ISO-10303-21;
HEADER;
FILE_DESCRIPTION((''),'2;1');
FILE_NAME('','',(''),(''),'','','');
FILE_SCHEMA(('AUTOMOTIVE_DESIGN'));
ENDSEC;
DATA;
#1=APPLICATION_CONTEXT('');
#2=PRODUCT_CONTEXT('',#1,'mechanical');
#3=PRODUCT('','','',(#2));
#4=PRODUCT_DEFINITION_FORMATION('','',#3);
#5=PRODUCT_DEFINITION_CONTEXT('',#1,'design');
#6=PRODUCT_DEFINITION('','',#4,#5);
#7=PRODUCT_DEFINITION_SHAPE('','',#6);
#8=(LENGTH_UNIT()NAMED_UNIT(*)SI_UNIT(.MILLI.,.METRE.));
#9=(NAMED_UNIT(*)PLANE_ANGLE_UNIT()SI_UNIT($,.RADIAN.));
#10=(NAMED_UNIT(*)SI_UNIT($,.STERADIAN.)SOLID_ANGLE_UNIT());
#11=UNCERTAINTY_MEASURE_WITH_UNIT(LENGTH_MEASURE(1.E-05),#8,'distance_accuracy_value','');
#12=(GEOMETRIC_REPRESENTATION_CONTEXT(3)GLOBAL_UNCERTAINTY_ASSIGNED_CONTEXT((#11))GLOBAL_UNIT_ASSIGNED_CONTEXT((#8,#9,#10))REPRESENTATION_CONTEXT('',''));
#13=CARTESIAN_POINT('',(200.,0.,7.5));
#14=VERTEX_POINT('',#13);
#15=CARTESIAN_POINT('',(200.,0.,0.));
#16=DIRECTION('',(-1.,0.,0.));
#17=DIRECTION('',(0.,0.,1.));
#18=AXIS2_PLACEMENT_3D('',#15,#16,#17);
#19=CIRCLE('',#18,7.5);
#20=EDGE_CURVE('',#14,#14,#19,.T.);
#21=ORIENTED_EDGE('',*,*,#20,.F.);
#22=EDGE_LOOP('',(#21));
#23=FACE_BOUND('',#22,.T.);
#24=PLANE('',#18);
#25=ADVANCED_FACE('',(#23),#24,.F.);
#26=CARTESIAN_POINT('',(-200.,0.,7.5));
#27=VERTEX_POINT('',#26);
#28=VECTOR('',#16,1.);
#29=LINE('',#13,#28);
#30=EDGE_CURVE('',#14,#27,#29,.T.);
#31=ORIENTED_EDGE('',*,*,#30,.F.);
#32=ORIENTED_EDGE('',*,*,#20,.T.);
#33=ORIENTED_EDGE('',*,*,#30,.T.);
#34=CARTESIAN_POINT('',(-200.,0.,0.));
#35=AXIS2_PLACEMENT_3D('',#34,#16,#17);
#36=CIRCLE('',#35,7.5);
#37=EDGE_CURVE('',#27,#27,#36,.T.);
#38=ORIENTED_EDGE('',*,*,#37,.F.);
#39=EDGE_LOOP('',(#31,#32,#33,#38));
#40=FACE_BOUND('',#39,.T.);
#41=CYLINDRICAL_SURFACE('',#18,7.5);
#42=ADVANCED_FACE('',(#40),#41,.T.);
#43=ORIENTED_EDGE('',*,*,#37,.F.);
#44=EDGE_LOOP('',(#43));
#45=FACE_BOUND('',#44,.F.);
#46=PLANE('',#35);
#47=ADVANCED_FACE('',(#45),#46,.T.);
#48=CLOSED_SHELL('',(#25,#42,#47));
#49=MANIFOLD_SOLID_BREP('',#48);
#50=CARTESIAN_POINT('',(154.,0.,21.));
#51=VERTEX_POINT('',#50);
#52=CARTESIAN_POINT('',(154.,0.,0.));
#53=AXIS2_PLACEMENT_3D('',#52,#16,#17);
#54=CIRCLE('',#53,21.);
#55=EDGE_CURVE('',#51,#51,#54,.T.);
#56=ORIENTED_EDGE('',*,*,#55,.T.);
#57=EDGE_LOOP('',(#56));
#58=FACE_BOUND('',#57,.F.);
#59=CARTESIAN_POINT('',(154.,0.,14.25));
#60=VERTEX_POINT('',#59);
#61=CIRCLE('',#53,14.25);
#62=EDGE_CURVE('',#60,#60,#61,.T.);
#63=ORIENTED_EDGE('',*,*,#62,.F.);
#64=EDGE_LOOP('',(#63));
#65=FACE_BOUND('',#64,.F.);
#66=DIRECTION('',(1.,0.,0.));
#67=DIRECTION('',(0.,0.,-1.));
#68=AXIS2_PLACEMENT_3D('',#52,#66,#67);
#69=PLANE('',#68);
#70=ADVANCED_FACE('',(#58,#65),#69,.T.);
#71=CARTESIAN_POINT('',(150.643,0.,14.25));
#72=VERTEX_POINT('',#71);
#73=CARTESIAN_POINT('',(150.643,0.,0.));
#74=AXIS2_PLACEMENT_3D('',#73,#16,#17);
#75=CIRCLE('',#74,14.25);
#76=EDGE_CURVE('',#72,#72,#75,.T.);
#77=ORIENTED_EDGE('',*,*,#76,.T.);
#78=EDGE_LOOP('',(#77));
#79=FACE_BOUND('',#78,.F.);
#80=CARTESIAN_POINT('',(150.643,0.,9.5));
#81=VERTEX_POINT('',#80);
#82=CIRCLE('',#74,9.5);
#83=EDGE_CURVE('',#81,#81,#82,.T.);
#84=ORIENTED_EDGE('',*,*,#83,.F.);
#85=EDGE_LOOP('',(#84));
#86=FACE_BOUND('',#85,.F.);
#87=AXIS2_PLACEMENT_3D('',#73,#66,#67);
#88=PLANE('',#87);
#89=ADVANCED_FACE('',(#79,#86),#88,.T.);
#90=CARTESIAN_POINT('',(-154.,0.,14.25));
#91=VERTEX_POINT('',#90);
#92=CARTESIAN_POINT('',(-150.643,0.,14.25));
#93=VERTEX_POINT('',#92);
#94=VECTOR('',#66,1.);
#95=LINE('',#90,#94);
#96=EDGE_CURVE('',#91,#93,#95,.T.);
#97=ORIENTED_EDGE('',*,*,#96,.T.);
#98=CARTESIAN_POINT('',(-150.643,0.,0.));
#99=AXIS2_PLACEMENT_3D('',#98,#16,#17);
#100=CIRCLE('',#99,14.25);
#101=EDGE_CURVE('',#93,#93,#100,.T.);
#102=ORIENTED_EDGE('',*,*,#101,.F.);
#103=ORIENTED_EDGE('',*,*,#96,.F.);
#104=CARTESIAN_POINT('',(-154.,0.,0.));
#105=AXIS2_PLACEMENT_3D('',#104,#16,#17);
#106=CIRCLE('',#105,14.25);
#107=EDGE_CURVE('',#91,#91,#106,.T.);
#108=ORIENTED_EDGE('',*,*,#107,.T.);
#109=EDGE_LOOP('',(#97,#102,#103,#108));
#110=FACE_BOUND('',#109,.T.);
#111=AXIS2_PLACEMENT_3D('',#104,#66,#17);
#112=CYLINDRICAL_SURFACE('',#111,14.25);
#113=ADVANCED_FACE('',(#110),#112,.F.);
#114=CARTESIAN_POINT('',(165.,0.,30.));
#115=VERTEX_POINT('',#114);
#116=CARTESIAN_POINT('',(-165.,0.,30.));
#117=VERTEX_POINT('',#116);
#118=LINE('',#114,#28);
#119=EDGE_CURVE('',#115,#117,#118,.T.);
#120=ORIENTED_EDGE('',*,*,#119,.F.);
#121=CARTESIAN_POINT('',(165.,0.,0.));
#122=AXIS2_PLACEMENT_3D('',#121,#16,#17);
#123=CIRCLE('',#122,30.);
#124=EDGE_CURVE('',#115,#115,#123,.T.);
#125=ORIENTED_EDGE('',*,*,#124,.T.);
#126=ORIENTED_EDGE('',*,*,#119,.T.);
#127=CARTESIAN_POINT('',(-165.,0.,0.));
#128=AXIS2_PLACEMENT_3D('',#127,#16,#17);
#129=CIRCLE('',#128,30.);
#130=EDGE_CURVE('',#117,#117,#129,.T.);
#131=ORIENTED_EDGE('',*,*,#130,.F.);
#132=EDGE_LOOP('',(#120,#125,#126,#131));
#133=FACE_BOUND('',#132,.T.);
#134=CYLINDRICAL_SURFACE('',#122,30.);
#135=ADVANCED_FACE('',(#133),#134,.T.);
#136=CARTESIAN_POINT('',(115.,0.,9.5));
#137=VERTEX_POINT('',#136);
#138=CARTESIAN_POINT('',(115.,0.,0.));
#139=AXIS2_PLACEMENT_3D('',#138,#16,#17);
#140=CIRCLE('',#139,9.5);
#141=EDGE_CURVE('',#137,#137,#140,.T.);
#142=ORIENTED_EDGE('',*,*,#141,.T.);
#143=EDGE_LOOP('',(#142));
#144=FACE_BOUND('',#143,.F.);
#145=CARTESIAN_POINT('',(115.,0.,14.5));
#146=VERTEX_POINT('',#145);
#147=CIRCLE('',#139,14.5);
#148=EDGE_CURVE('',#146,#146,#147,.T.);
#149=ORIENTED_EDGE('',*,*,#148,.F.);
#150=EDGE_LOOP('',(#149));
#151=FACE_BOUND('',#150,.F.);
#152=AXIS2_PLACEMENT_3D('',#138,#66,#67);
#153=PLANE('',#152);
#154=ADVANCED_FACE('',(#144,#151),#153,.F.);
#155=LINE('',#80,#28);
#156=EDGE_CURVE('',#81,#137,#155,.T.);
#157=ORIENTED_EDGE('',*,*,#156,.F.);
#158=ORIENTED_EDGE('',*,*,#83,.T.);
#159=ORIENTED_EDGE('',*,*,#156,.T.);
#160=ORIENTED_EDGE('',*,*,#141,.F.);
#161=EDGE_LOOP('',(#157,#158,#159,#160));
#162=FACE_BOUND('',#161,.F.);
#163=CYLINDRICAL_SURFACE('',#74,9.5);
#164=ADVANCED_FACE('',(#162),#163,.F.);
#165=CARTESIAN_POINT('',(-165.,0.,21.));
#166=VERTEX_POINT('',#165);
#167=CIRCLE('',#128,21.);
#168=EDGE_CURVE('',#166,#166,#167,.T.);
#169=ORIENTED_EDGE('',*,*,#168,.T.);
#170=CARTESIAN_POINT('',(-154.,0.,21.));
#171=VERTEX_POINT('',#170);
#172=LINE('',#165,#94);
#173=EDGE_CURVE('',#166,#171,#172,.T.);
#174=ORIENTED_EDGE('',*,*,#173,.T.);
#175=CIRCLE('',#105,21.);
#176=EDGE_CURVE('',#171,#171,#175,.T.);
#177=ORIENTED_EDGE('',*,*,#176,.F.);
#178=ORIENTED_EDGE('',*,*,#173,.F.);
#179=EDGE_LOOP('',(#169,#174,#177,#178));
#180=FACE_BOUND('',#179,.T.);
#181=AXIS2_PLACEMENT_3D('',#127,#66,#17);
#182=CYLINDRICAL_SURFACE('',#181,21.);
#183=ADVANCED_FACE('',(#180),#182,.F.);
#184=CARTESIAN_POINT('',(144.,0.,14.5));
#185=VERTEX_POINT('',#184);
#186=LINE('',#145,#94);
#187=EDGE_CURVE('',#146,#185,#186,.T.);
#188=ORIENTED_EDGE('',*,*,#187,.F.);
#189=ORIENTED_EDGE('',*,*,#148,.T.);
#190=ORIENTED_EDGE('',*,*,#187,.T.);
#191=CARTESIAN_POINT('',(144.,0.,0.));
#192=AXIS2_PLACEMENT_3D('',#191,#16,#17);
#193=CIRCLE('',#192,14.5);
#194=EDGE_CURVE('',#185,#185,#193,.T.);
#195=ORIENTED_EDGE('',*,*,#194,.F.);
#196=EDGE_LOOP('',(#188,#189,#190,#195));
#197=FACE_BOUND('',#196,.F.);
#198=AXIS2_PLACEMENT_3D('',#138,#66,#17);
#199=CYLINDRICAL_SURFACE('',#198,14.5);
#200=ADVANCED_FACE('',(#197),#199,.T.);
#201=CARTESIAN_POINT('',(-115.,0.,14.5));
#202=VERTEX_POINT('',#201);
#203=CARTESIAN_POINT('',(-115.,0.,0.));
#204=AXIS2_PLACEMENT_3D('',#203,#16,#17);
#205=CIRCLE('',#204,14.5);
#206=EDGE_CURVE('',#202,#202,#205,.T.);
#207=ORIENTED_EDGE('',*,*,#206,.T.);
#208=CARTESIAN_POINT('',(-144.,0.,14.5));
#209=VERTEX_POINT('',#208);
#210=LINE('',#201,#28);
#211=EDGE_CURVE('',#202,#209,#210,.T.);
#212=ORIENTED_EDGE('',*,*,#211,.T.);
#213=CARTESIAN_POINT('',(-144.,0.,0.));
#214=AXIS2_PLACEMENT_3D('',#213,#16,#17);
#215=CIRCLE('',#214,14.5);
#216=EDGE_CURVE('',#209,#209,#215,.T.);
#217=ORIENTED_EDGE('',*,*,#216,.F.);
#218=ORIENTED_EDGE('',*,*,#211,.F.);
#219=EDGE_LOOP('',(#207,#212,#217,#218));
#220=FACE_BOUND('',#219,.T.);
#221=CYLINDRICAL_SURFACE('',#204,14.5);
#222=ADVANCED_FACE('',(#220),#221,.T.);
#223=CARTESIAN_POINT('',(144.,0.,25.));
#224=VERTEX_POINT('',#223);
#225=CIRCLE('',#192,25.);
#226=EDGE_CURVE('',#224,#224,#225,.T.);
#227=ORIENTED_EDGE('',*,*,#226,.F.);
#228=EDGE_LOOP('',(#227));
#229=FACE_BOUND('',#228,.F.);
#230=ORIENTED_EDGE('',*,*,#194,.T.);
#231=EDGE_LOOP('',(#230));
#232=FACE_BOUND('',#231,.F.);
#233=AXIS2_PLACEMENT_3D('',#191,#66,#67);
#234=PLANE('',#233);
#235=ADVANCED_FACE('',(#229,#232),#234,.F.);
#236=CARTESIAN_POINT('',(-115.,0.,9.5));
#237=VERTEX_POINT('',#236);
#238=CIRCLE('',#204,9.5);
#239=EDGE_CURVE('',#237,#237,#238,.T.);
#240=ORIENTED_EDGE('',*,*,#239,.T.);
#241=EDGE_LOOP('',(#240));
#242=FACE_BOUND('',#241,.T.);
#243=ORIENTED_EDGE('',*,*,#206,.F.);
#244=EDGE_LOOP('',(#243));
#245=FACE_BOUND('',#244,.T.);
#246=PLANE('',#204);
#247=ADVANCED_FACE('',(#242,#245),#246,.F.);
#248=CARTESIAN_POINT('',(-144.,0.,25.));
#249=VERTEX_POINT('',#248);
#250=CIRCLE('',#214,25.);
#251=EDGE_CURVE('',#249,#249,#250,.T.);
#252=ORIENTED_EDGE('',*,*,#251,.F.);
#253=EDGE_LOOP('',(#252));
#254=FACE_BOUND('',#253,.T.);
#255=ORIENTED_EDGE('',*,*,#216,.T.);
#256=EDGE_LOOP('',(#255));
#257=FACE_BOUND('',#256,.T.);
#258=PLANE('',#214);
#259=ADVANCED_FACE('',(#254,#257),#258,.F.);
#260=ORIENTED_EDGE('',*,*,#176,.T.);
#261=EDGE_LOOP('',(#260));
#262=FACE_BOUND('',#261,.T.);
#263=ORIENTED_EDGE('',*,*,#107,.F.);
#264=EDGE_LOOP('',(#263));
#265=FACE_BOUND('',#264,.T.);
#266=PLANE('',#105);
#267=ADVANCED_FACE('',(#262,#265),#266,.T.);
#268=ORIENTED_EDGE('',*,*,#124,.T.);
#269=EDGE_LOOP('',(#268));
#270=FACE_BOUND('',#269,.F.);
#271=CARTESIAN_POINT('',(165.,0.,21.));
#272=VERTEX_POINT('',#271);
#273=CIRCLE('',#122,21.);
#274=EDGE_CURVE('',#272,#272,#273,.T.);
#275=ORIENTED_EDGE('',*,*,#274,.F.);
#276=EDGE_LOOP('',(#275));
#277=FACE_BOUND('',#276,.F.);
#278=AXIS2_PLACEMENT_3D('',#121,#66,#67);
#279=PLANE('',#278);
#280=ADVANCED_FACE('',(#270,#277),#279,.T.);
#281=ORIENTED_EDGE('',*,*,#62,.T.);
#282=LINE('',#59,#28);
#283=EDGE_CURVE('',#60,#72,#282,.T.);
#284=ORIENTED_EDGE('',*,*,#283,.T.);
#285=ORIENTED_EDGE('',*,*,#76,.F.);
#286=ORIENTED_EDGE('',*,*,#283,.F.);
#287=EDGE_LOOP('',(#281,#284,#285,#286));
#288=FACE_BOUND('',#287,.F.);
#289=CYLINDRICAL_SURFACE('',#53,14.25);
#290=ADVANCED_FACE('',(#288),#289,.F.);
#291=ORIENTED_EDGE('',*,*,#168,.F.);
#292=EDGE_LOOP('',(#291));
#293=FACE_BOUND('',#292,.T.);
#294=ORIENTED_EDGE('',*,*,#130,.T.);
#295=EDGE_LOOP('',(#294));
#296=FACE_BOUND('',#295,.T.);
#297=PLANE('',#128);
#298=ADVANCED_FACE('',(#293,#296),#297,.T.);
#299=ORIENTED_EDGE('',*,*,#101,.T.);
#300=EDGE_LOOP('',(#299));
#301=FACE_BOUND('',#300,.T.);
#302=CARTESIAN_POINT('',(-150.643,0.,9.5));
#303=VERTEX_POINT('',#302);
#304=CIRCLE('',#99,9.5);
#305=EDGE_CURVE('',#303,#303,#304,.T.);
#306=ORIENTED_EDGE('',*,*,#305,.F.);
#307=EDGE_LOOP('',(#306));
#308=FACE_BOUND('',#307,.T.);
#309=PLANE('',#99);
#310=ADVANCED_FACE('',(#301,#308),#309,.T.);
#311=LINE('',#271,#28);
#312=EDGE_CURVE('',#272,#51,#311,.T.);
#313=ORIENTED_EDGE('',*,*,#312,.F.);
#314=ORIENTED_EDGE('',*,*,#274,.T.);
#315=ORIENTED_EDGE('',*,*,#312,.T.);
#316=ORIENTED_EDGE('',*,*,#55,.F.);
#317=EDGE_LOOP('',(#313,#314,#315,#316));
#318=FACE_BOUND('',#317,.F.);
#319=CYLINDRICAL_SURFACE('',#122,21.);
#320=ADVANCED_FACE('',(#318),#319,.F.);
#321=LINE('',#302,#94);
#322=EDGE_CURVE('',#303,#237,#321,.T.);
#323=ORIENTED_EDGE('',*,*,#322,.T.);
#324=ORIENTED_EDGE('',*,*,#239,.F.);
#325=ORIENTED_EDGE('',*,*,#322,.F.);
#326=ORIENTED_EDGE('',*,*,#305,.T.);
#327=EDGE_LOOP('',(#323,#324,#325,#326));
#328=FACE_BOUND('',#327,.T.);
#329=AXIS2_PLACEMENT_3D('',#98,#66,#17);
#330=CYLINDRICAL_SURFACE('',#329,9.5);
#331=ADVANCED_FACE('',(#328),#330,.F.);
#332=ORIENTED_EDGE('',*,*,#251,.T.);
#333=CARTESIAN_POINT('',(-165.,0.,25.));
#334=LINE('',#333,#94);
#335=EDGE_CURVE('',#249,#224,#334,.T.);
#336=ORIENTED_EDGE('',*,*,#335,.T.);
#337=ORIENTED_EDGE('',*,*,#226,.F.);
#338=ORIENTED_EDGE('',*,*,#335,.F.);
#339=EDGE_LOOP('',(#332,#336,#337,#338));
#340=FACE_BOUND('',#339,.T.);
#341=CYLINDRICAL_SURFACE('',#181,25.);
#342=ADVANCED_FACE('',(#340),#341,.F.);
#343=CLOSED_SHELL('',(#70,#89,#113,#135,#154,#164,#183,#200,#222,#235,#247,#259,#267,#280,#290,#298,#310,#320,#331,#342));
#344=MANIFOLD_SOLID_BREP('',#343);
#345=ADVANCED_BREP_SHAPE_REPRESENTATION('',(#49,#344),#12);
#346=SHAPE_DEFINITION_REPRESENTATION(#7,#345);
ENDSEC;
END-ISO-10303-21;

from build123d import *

# Parameters (mm, degrees)
F0_W   = 315.643
F0_H   = 7.5
F0_W_2 = 11
F0_W_3 = 3.357
F0_W_4 = 35


# Not quite as in the source:
# - a pattern or mirror of a feature is missing from the dataset's text; its kind, count and spacing are read off the source's solid


with BuildPart() as f1:
    # F0 (on Front) → F1 (revolve)
    with BuildSketch(Plane.XZ):
        Polygon((-144, 25), (165, 25), (165, 30), (-165, 30), (-165, 25), align=None)
    revolve(axis=Axis((0, 0, 0), (-1, 0, 0)))

    # F0 (on Front) → F2 (revolve)
    with BuildSketch(Plane.XZ):
        Polygon((-144, 14.5), (-144, 25), (-165, 25), (-165, 21), (-154, 21), (-154, 14.25), (-150.643, 14.25), (-150.643, 9.5), (-115, 9.5), (-115, 14.5), align=None)
    f2 = revolve(axis=Axis((0, 0, 0), (-1, 0, 0)))

    # F2_copies: F2 across plane
    add(f2.mirror(Plane(origin=(0, 0, 0), x_dir=(0, 0, 1), z_dir=(1, 0, 0))))


with BuildPart() as f3:
    # F0 (on Front) → F3 (revolve)
    with BuildSketch(Plane.XZ):
        with Locations((7.1785, 3.75)):
            Rectangle(F0_W, F0_H)
        with Locations((-159.5, 3.75)):
            Rectangle(F0_W_2, F0_H)
        with Locations((-152.3215, 3.75)):
            Rectangle(F0_W_3, F0_H)
        with Locations((-182.5, 3.75)):
            Rectangle(F0_W_4, F0_H)
        with Locations((182.5, 3.75)):
            Rectangle(F0_W_4, F0_H)
    revolve(axis=Axis((0, 0, 0), (-1, 0, 0)))


solid = Compound([f1.part, f3.part])
